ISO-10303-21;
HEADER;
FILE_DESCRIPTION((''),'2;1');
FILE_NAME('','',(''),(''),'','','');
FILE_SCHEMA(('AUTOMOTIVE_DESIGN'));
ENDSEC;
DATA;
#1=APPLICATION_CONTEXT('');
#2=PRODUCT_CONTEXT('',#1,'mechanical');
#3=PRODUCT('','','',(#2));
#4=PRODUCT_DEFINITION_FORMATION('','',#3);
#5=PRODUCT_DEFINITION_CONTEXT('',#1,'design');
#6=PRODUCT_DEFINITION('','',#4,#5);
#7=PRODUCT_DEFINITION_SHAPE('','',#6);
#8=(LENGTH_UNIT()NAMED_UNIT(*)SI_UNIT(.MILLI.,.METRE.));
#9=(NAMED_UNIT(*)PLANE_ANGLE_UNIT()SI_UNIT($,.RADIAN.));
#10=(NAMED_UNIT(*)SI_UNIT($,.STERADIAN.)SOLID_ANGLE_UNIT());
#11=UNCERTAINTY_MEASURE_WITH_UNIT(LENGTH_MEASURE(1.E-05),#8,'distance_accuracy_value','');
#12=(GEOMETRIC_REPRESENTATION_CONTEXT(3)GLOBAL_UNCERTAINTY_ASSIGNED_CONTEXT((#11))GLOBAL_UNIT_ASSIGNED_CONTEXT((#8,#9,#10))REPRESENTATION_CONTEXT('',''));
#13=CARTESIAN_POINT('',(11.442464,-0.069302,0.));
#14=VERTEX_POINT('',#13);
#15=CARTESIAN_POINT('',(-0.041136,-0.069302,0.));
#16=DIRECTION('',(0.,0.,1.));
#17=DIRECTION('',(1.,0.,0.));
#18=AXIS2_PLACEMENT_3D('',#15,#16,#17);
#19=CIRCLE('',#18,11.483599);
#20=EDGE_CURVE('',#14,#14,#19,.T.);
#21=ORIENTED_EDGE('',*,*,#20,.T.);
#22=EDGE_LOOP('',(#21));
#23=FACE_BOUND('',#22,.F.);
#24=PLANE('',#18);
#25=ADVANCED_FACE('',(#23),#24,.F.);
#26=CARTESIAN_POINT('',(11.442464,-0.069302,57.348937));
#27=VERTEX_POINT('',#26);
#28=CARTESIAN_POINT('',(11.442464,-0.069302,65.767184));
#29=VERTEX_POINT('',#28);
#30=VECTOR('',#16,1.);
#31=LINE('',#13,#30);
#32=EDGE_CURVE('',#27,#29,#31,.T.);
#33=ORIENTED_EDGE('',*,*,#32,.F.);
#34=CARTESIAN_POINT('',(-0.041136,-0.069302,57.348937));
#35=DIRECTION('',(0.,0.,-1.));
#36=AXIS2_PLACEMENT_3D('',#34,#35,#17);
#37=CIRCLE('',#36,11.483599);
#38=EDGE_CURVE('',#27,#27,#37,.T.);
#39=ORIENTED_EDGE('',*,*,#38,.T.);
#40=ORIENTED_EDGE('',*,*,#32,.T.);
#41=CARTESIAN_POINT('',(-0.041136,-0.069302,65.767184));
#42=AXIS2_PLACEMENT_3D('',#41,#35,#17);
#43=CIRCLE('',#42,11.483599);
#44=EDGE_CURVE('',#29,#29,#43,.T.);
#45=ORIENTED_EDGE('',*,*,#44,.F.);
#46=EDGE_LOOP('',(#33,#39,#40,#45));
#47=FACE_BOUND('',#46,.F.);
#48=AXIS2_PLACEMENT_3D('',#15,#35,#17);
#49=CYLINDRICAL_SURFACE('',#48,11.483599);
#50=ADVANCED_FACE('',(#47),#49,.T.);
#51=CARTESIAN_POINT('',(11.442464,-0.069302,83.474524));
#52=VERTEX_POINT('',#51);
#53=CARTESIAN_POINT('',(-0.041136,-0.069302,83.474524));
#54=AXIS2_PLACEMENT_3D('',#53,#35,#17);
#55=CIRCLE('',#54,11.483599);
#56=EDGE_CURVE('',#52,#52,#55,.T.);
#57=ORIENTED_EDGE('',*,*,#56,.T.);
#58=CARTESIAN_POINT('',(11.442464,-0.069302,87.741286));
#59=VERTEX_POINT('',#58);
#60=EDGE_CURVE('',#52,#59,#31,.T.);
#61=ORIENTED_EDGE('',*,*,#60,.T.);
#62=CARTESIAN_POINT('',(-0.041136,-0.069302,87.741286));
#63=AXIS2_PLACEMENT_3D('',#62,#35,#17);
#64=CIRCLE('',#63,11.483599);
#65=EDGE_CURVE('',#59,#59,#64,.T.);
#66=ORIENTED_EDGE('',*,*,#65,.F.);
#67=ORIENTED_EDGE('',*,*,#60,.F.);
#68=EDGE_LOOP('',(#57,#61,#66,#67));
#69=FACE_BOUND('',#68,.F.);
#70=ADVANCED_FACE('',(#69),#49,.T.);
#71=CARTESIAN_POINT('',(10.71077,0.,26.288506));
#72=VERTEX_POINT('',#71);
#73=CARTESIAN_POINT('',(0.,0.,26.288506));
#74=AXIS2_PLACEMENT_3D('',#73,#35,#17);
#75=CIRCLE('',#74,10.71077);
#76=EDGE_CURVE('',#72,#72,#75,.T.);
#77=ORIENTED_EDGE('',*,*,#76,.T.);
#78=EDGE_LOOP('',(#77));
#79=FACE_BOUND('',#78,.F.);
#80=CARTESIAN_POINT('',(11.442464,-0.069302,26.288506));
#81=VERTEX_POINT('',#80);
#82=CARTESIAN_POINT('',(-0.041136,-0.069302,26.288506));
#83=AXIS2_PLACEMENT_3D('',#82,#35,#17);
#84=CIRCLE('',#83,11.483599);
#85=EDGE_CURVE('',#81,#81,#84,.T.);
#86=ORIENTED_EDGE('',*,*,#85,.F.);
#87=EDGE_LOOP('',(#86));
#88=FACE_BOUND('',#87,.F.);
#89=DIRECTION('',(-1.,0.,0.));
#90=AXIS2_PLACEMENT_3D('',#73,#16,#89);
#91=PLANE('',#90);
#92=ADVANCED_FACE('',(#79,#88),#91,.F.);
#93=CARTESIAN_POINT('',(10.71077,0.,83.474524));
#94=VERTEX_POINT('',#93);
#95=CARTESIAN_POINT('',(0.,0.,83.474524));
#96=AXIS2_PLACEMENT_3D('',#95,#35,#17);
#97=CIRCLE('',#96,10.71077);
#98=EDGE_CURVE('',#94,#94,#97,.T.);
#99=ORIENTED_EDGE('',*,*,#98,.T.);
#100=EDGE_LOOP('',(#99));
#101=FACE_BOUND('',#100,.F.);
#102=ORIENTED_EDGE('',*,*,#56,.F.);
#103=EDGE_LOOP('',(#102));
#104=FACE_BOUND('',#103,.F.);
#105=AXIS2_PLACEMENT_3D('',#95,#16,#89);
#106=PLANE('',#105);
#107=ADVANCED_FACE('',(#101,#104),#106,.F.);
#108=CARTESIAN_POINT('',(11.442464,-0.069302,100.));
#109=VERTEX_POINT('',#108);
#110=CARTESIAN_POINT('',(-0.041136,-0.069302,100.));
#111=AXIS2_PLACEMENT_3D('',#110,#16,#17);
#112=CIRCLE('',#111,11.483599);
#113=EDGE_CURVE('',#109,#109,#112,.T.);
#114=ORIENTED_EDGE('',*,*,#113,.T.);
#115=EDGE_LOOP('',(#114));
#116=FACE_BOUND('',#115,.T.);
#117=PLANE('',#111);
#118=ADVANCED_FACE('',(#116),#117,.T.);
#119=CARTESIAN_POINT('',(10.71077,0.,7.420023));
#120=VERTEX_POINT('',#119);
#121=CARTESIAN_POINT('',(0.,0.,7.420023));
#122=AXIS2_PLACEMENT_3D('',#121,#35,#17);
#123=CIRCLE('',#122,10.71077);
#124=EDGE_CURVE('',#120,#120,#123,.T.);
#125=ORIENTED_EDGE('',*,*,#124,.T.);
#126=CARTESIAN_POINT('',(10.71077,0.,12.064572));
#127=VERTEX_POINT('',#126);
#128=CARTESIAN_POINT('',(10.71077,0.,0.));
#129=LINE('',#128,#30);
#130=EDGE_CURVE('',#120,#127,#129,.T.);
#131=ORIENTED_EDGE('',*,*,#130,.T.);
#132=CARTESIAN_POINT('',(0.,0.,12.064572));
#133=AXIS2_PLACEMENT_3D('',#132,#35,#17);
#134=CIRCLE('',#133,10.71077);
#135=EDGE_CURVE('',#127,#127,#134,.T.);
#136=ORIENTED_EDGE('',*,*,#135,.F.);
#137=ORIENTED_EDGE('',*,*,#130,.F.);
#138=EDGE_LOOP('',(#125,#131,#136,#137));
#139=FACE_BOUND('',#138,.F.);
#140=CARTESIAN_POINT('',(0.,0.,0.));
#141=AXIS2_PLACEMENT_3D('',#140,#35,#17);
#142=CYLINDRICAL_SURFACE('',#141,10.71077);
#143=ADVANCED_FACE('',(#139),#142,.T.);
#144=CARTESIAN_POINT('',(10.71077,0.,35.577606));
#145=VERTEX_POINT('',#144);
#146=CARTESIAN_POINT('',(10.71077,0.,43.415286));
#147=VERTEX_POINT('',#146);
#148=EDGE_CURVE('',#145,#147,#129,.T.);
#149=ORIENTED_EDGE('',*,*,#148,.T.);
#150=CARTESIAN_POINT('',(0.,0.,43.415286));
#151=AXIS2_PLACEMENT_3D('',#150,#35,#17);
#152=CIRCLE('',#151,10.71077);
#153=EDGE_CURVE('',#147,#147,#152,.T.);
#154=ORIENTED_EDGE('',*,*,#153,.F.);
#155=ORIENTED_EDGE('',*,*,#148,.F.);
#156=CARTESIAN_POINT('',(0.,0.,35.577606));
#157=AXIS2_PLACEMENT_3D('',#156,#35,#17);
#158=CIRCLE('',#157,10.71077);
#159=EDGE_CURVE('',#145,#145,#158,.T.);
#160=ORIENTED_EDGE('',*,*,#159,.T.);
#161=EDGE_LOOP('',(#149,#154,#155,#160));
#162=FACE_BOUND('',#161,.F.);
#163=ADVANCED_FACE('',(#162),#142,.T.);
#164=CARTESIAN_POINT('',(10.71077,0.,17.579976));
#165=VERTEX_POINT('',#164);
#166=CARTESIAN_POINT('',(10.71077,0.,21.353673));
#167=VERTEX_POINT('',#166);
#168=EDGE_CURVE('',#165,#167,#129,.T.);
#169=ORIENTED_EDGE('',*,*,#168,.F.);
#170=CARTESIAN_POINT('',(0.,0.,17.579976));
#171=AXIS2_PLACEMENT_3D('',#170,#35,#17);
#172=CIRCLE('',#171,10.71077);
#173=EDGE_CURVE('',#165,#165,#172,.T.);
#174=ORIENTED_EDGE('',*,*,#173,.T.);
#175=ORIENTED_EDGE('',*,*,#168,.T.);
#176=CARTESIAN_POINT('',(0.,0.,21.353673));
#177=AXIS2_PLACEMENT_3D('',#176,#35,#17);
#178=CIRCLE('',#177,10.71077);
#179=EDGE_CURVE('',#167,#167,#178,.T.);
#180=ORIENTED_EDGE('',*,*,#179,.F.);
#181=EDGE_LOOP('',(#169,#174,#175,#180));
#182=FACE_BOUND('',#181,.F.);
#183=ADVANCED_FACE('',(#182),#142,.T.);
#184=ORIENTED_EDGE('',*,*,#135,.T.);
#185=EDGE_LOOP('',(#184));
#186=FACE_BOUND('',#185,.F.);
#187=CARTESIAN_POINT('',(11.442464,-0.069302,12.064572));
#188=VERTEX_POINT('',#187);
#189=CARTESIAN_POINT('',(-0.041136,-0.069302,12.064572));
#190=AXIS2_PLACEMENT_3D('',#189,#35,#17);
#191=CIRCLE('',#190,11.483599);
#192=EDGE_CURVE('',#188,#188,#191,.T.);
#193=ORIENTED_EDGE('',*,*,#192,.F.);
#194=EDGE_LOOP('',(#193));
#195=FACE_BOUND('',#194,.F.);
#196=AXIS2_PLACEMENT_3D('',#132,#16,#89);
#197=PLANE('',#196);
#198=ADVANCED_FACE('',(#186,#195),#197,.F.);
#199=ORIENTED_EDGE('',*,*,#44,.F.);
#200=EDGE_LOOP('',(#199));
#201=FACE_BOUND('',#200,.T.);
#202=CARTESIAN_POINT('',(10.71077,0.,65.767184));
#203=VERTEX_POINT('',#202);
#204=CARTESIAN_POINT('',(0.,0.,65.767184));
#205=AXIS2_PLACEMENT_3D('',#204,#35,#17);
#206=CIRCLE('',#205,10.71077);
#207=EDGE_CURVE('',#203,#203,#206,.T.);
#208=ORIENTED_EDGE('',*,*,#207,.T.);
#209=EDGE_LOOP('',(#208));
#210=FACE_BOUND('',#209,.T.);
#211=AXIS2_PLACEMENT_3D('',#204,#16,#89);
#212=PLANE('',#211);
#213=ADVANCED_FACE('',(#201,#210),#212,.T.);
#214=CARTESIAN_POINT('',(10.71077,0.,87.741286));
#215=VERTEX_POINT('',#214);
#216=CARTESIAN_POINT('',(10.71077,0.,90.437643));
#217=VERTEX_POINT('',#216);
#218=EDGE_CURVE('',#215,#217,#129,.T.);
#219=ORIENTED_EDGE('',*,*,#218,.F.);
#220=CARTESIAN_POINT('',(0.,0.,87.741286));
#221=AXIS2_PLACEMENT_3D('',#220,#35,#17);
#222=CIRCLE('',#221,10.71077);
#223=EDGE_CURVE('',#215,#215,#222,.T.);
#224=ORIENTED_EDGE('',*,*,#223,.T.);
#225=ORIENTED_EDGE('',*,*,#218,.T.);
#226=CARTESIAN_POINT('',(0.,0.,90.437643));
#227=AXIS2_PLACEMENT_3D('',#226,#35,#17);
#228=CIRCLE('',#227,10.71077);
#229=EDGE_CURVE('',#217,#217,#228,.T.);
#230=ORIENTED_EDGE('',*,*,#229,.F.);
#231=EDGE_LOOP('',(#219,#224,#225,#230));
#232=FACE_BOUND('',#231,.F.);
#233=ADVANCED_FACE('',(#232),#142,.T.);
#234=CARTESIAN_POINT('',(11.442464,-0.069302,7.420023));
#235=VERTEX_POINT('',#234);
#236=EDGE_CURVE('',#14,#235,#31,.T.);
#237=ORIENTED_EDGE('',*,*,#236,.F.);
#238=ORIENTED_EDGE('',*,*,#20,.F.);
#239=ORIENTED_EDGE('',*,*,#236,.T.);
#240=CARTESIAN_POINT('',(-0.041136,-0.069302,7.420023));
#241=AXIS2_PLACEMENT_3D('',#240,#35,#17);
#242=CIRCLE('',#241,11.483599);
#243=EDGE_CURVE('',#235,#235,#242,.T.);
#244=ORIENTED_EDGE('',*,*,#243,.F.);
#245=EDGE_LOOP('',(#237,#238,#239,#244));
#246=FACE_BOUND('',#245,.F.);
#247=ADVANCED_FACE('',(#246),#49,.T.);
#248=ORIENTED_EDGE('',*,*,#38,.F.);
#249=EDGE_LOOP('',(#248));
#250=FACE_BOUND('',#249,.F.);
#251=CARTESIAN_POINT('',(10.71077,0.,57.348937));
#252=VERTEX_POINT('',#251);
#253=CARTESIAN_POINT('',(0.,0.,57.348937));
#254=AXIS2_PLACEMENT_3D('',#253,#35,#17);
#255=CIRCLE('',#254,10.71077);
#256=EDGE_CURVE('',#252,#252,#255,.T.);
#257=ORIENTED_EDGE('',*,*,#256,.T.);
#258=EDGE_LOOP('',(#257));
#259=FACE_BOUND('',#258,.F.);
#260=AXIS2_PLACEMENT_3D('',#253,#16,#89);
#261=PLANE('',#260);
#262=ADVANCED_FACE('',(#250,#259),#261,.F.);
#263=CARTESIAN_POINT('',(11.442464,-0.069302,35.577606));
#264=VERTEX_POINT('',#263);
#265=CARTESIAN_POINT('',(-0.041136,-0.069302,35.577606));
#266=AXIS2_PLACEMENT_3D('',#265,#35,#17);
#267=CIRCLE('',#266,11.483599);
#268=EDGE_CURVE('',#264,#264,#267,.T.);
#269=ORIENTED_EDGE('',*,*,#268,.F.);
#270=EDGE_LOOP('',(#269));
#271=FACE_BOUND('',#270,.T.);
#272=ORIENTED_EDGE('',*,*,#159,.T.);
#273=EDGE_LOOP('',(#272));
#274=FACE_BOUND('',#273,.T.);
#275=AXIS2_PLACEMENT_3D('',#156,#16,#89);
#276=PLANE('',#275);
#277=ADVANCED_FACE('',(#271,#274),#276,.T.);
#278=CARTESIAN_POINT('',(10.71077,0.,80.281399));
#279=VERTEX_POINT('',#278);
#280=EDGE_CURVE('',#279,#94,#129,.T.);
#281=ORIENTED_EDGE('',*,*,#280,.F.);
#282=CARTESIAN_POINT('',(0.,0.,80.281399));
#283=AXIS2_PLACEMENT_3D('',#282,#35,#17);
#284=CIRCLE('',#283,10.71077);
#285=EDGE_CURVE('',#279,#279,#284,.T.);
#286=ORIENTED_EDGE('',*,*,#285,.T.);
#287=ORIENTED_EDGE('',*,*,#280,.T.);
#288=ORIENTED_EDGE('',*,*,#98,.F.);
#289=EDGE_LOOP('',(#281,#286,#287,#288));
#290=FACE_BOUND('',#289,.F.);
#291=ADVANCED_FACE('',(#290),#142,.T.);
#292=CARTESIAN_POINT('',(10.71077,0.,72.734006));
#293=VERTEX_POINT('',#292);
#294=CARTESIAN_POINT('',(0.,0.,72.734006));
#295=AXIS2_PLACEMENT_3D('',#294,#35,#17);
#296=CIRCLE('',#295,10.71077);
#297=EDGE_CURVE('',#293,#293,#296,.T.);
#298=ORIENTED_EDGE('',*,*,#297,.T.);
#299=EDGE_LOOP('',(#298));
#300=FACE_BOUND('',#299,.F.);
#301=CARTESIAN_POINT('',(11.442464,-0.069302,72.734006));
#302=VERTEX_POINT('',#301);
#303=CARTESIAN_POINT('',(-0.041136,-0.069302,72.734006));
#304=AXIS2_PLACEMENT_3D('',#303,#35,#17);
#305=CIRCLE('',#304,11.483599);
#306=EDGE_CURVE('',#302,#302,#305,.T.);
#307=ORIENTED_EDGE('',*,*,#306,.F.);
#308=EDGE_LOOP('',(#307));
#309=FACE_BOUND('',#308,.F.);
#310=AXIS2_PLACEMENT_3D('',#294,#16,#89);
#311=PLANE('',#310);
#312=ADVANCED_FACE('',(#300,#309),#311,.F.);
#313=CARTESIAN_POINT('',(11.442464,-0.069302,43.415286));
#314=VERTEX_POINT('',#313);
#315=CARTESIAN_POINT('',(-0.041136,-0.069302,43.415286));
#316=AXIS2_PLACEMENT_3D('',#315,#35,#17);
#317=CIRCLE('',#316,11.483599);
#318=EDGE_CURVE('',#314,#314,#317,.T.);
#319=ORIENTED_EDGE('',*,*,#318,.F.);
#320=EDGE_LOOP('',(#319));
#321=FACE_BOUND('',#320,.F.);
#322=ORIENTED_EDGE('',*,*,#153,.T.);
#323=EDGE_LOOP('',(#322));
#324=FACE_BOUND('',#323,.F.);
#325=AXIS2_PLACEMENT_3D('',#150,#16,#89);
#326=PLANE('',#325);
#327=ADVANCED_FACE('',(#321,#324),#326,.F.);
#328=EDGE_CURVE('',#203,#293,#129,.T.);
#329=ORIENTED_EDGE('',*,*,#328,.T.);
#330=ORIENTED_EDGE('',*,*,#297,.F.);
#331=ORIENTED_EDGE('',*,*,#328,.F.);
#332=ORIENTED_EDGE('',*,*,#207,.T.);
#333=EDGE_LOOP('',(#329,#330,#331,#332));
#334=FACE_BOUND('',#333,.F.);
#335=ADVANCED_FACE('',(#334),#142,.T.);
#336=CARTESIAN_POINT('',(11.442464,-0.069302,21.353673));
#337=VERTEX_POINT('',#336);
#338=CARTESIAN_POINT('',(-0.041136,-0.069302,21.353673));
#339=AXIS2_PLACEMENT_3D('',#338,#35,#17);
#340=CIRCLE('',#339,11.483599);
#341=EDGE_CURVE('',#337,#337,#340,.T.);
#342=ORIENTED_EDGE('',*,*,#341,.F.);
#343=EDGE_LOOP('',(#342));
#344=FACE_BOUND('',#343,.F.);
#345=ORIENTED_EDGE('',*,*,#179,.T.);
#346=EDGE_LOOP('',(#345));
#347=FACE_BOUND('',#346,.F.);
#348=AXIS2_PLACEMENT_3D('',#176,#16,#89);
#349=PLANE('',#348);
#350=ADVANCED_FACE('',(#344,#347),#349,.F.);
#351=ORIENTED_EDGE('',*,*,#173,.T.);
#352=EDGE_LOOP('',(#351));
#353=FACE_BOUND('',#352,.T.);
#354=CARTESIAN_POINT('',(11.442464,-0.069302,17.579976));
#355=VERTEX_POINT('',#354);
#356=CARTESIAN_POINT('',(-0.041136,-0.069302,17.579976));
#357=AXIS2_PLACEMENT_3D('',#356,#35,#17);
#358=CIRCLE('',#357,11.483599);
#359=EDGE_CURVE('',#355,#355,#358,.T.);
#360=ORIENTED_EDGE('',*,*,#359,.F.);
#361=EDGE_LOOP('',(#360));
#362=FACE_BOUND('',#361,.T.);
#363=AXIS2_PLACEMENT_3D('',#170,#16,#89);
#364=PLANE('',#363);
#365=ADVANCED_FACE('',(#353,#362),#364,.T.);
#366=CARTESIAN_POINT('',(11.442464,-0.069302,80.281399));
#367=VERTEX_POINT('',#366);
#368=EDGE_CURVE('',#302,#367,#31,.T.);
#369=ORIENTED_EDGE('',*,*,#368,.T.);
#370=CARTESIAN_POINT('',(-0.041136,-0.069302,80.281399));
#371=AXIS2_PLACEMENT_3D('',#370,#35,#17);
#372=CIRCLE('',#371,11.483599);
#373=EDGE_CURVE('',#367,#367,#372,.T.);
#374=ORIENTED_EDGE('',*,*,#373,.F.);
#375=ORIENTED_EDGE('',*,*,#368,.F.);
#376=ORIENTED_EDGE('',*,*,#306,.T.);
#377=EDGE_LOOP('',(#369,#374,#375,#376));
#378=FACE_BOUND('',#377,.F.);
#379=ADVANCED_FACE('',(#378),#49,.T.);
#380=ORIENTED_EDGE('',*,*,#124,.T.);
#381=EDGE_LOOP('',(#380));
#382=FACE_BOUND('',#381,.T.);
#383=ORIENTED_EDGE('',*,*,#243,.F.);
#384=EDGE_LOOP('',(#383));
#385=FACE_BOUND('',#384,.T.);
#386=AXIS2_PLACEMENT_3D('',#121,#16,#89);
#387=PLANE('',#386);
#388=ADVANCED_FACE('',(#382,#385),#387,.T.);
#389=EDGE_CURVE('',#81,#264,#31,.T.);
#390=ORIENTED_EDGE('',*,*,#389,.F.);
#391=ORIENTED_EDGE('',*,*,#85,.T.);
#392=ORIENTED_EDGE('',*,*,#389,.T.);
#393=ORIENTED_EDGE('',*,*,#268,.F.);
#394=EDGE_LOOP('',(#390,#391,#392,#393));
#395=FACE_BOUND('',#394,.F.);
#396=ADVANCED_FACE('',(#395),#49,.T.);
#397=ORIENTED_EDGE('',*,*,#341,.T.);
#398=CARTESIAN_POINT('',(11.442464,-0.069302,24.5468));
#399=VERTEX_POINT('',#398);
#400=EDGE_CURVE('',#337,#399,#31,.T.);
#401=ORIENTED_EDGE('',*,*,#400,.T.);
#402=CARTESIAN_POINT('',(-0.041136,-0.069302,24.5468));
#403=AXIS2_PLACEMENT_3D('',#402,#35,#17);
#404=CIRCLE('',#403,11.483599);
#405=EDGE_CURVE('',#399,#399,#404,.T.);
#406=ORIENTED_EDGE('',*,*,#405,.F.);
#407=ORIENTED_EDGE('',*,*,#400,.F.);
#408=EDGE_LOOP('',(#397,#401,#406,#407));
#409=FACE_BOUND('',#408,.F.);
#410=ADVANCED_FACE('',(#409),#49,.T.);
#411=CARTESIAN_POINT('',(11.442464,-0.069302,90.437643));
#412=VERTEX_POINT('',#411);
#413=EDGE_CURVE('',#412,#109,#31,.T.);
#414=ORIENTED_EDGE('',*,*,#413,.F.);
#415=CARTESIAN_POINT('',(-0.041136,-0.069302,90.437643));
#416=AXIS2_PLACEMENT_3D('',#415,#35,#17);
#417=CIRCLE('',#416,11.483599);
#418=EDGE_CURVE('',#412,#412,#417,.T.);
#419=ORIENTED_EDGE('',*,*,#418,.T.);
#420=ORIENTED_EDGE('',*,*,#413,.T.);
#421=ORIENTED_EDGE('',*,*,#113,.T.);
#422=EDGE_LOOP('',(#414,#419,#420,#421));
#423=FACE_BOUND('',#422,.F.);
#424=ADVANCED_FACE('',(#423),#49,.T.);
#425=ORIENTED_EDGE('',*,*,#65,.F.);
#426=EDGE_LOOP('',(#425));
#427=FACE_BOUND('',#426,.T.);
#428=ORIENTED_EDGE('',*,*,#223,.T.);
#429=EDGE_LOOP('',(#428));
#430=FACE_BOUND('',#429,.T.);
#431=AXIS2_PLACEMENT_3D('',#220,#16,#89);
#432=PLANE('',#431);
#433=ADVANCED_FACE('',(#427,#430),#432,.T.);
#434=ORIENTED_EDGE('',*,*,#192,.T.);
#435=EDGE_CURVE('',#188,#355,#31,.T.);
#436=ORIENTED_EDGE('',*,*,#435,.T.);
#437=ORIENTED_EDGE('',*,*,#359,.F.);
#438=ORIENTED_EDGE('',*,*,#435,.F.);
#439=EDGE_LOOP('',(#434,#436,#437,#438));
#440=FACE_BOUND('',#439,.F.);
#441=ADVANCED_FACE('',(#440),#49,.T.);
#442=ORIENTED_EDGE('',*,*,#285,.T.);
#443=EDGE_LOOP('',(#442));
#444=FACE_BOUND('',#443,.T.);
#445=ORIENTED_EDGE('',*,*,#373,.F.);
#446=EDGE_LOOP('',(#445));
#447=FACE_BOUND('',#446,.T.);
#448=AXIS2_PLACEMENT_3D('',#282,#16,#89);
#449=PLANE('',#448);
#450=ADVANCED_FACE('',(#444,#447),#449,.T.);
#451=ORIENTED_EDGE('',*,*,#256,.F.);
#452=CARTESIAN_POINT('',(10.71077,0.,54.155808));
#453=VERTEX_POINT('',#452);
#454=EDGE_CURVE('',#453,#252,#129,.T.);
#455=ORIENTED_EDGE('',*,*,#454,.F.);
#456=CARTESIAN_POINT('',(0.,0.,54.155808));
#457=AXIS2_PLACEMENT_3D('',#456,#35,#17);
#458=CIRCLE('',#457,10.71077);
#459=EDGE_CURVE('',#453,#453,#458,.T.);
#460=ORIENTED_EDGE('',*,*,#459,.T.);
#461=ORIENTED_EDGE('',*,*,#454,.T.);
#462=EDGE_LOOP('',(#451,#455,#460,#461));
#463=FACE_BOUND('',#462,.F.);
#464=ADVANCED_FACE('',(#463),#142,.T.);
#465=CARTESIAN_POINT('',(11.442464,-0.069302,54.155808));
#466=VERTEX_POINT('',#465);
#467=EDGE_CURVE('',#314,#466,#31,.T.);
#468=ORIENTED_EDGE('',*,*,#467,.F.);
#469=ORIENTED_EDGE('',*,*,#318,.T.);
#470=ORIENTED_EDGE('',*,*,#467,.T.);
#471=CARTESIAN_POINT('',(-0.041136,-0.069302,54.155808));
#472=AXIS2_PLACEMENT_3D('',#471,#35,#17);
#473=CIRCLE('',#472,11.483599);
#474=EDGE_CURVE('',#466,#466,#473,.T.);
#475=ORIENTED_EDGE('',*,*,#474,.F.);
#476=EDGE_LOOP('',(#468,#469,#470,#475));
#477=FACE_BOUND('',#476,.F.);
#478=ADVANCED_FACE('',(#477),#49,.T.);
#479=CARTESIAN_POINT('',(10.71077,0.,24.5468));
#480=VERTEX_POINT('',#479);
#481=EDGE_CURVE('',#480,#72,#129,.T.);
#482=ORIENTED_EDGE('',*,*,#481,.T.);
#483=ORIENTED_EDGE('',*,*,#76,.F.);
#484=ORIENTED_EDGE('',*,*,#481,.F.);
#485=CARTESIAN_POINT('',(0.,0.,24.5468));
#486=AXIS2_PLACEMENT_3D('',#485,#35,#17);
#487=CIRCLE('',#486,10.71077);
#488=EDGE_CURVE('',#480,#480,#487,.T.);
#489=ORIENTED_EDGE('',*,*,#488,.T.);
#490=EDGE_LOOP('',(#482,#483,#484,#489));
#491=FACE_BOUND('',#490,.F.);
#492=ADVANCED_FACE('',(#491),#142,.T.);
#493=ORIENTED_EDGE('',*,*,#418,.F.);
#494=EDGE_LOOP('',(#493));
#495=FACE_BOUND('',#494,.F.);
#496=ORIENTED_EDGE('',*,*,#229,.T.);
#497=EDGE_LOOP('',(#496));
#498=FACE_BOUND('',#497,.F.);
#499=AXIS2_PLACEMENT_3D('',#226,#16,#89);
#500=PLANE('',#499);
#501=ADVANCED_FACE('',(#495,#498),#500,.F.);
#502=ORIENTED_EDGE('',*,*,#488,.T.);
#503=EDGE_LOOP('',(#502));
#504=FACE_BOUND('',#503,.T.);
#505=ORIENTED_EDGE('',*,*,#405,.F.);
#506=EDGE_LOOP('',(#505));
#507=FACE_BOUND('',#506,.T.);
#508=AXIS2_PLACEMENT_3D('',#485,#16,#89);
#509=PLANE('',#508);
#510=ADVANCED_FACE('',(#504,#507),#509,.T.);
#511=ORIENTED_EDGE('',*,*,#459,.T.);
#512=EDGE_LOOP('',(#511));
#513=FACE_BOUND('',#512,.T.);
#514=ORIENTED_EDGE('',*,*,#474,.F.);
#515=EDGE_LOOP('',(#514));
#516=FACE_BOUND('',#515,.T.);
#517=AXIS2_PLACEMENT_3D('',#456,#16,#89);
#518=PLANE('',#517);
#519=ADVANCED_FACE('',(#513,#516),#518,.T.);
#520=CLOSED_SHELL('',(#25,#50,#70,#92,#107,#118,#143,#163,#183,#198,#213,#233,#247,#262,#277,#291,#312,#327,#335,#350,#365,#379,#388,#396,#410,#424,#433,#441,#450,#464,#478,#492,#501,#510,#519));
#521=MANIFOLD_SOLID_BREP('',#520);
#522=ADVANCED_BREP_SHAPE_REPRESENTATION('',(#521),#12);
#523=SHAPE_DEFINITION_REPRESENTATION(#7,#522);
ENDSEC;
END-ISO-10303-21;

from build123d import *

# Parameters (mm, degrees)
F0_R     = 11.4835992145
F0_R_2   = 10.7107701276
F1_DEPTH = 100
F2_W     = 32.8816715628
F2_H     = 2.6963576674
F2_W_2   = 32.8778307885
F2_H_2   = 3.1931251287
F2_W_3   = 32.5816031545
F2_H_3   = 6.9668218493
F2_W_4   = 32.9470410943
F2_H_4   = 3.193128854
F2_W_5   = 29.896620661
F2_H_5   = 7.8376792371
F2_H_6   = 1.7417054623
F2_W_6   = 27.0034540445
F2_H_7   = 3.7736967206
F2_W_7   = 26.4959204942
F2_H_8   = 4.6445494518
F4_DEPTH = 100


# Not quite as in the source:
# - a feature names something its author has since deleted; it is built from what else it names


with BuildPart() as f1:
    # F0 (on Top) → F1 (new body)
    with BuildSketch(Plane.XY):
        with Locations((-0.0411355359, -0.0693021866)):
            Circle(F0_R)
        Circle(F0_R_2, mode=Mode.SUBTRACT)
    extrude(amount=F1_DEPTH)

    # F2 (on Front) → F3 (revolve, cut)
    with BuildSketch(Plane.XZ):
        with Locations((-16.4408357814, 89.0894643962)):
            Rectangle(F2_W, F2_H)
        with Locations((-16.4389153942, 81.8779617548)):
            Rectangle(F2_W_2, F2_H_2)
        with Locations((-16.2908015773, 69.2505948246)):
            Rectangle(F2_W_3, F2_H_3)
        with Locations((-16.4735205472, 55.7523723692)):
            Rectangle(F2_W_4, F2_H_4)
        with Locations((-14.9483103305, 39.4964460284)):
            Rectangle(F2_W_5, F2_H_5)
        with Locations((-14.9483103305, 25.4176529124)):
            Rectangle(F2_W_5, F2_H_6)
        with Locations((-13.5017270222, 19.4668248296)):
            Rectangle(F2_W_6, F2_H_7)
        with Locations((-13.2479602471, 9.7422976978)):
            Rectangle(F2_W_7, F2_H_8)
    revolve(axis=Axis((0, 0, 49.8652271926), (0, 0, 1)), mode=Mode.SUBTRACT)

    # F0 (on Top) → F4 (join)
    with BuildSketch(Plane.XY):
        Circle(F0_R_2)
    extrude(amount=F4_DEPTH)


solid = f1.part
